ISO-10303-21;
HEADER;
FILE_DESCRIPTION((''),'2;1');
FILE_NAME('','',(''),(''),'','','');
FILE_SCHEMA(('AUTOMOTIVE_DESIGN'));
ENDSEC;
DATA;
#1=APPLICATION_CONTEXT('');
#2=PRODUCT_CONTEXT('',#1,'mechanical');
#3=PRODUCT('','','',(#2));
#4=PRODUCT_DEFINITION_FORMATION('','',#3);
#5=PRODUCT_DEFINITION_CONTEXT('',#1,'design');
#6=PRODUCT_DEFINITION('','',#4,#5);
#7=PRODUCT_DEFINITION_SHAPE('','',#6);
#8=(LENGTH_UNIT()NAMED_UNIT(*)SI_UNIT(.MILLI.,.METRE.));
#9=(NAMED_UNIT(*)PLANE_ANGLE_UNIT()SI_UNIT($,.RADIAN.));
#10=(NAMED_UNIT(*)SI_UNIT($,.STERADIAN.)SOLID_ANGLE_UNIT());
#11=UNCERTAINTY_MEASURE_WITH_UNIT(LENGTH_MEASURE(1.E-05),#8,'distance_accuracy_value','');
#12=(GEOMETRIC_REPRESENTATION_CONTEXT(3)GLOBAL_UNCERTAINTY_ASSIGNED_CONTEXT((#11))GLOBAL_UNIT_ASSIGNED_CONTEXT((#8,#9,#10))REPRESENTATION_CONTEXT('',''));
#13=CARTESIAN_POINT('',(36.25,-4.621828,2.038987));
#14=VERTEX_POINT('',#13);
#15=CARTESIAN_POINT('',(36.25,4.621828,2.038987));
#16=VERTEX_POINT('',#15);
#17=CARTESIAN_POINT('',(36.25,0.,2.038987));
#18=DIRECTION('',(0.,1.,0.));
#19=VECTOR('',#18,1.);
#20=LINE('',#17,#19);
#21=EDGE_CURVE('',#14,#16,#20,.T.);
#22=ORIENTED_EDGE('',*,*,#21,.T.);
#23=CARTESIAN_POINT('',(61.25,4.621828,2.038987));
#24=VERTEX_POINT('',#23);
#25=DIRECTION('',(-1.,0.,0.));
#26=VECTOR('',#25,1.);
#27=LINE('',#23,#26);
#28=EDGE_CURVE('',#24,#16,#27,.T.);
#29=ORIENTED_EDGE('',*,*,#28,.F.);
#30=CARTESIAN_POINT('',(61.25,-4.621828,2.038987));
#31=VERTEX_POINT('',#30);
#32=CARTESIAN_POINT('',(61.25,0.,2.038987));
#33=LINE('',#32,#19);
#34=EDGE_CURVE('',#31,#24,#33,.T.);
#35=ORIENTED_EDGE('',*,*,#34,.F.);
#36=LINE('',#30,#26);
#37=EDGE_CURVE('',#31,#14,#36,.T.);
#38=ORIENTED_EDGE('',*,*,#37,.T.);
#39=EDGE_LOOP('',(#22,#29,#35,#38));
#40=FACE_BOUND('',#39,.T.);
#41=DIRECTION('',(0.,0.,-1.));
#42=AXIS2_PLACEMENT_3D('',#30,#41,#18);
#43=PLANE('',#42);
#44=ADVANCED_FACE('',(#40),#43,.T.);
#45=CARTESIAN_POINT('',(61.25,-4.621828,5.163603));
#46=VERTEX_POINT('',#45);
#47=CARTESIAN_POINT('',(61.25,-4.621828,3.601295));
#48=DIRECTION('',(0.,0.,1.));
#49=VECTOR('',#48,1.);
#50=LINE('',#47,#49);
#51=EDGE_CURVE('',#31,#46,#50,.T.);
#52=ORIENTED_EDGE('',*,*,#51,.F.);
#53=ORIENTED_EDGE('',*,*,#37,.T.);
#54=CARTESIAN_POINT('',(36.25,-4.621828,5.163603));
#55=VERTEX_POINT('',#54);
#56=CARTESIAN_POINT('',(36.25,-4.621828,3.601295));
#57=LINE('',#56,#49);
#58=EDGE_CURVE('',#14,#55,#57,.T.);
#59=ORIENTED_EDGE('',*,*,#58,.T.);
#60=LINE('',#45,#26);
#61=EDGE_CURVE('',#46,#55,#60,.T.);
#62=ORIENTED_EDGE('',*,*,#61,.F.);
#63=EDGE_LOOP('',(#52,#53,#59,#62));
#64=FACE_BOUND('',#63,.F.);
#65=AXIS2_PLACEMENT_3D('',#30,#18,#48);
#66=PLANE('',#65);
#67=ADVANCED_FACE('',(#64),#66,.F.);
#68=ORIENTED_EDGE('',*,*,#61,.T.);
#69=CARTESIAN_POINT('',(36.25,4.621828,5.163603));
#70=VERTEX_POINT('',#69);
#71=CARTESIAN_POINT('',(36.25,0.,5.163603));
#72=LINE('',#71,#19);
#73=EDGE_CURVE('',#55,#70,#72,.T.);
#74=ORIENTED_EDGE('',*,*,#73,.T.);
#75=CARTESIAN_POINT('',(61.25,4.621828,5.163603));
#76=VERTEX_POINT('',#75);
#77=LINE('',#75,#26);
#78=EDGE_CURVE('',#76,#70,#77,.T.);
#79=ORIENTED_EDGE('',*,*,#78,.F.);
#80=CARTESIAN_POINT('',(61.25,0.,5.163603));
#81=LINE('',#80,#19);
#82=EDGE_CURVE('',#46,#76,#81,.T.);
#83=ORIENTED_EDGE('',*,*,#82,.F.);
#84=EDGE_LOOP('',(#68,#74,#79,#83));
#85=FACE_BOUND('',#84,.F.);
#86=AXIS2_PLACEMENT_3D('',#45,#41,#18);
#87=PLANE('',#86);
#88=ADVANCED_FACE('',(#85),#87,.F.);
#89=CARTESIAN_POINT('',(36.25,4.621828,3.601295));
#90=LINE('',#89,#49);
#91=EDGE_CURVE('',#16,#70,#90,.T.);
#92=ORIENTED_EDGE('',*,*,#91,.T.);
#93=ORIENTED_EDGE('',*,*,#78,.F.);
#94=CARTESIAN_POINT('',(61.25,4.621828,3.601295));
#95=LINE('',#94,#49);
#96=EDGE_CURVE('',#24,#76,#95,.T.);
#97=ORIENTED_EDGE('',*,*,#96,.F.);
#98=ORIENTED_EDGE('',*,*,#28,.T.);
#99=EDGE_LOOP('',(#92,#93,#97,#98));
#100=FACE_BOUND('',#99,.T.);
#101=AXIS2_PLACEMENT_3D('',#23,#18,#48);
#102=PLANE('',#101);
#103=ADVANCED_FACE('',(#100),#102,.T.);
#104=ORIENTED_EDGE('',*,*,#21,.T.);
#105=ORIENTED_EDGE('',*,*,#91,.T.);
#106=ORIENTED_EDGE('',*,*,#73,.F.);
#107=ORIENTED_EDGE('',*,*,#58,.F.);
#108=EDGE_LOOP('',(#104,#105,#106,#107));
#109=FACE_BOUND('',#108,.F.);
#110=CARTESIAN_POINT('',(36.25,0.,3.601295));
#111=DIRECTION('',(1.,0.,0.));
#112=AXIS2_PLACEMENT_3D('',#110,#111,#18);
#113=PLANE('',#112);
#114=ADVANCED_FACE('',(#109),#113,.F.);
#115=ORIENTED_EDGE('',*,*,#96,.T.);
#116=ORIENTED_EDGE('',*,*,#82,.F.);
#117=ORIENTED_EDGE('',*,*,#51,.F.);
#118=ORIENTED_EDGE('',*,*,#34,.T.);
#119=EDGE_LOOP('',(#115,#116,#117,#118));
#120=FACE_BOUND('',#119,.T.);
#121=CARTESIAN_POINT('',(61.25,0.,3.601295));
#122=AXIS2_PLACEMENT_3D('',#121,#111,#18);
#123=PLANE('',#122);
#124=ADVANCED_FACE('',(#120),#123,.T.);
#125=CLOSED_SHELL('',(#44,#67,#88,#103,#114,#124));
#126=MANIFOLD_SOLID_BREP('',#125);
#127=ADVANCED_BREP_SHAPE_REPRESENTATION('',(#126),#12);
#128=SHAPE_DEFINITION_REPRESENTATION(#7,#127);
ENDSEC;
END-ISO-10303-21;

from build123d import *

# Parameters (mm, degrees)
F0_W      = 122.5
F0_H      = 57
F1_DEPTH  = 7
F2_R      = 5
F4_W      = 7.9906114999
F4_H      = 3.491573553
F6_DEPTH  = 0.75
F3_R      = 2.8696252626
F3_R_2    = 3.0222724843
F3_W      = 6.7058205605
F3_H      = 3.0176183209
F7_DEPTH  = 0.75
F5_R      = 4.4116461286
F8_DEPTH  = 0.5
F10_W     = 10.931
F10_H     = 2.55831494
F11_DEPTH = 1
F12_R     = 2.4748812048
F13_DEPTH = 7
F14_W     = 9.2436559498
F14_H     = 3.1246161088
F15_DEPTH = 25


# Not quite as in the source:
# - a fillet or chamfer that OpenCascade refuses, or shapes differently, is made with other operations: its cross-section is extruded or revolved along the edge and cut away or added


with BuildPart() as f1:
    # F0 (on Top) → F1 (new body)
    with BuildSketch(Plane.XY):
        Rectangle(F0_W, F0_H)
    extrude(amount=F1_DEPTH)

    # F2
    f2_edges = [f1.edges().sort_by_distance(p)[0] for p in [
        (61.25, -28.5, 3.5),
        (61.25, 28.5, 3.5),
        (-61.25, -28.5, 3.5),
        (-61.25, 28.5, 3.5),
    ]]
    fillet(f2_edges, radius=F2_R)

    # F4 (on face) → F6 (join)
    with BuildSketch(Plane(origin=(-61.25, 0, 0), x_dir=(0, -1, 0), z_dir=(-1, 0, 0))):
        with Locations((-17.3388376055, 3.4486234912)):
            Rectangle(F4_W, F4_H)
    extrude(amount=F6_DEPTH)

    # F3 (on face) → F7 (join)
    with BuildSketch(Plane.XZ.offset(28.5)):
        with Locations((-42.9149009287, 3.2392428257)):
            Circle(F3_R)
        with Locations((-34.8679199815, 3.2392428257)):
            Circle(F3_R_2)
        with Locations((-51.1295311153, 3.2392428257)):
            Rectangle(F3_W, F3_H)
    extrude(amount=F7_DEPTH)

    # F5 (on face) → F8 (cut)
    with BuildSketch(Plane.XY.offset(7)):
        with Locations((54.2597770691, -0.2932948992)):
            Circle(F5_R)
    extrude(amount=-F8_DEPTH, mode=Mode.SUBTRACT)

    # F9: fillet of radius 1 on 1 edges, made by hand


with BuildPart() as f9_tool2:
    # F9_s3 → F9_t4 (revolve)
    with BuildSketch(Plane.XZ.offset(0.2932948992)):
        with BuildLine():
            ThreePointArc((58.6714231977, 7.5), (58.3785299789, 6.7928932188), (57.6714231977, 6.5))
            Line((57.6714231977, 6.5), (58.6714231977, 6.5))
            Line((58.6714231977, 6.5), (58.6714231977, 7.5))
        make_face()
    revolve(axis=Axis((54.2597770691, -0.2932948992, 6.5), (0, 0, 1)))

    split(bisect_by=Plane.XY.offset(7), keep=Keep.BOTTOM)


with BuildPart() as f1_1:
    add(f1.part)

    # F9_t1: union F9_tool2
    add(f9_tool2.part)

    # F10 (on face) → F11 (join)
    with BuildSketch(Plane.YZ.offset(61.25)):
        with Locations((-0.3508040114, 3.4726482118)):
            Rectangle(F10_W, F10_H)
    extrude(amount=-F11_DEPTH)

    # F12 (on face) → F13 (cut)
    with BuildSketch(Plane.YZ.offset(61.25)):
        with Locations((16.8605856597, 3.6920385901)):
            Circle(F12_R)
    extrude(amount=-F13_DEPTH, mode=Mode.SUBTRACT)

    # F14 (on face) → F15 (intersect)
    with BuildSketch(Plane.YZ.offset(61.25)):
        with Locations((0, 3.6012954079)):
            Rectangle(F14_W, F14_H)
    extrude(amount=-F15_DEPTH, mode=Mode.INTERSECT)


solid = f1_1.part
